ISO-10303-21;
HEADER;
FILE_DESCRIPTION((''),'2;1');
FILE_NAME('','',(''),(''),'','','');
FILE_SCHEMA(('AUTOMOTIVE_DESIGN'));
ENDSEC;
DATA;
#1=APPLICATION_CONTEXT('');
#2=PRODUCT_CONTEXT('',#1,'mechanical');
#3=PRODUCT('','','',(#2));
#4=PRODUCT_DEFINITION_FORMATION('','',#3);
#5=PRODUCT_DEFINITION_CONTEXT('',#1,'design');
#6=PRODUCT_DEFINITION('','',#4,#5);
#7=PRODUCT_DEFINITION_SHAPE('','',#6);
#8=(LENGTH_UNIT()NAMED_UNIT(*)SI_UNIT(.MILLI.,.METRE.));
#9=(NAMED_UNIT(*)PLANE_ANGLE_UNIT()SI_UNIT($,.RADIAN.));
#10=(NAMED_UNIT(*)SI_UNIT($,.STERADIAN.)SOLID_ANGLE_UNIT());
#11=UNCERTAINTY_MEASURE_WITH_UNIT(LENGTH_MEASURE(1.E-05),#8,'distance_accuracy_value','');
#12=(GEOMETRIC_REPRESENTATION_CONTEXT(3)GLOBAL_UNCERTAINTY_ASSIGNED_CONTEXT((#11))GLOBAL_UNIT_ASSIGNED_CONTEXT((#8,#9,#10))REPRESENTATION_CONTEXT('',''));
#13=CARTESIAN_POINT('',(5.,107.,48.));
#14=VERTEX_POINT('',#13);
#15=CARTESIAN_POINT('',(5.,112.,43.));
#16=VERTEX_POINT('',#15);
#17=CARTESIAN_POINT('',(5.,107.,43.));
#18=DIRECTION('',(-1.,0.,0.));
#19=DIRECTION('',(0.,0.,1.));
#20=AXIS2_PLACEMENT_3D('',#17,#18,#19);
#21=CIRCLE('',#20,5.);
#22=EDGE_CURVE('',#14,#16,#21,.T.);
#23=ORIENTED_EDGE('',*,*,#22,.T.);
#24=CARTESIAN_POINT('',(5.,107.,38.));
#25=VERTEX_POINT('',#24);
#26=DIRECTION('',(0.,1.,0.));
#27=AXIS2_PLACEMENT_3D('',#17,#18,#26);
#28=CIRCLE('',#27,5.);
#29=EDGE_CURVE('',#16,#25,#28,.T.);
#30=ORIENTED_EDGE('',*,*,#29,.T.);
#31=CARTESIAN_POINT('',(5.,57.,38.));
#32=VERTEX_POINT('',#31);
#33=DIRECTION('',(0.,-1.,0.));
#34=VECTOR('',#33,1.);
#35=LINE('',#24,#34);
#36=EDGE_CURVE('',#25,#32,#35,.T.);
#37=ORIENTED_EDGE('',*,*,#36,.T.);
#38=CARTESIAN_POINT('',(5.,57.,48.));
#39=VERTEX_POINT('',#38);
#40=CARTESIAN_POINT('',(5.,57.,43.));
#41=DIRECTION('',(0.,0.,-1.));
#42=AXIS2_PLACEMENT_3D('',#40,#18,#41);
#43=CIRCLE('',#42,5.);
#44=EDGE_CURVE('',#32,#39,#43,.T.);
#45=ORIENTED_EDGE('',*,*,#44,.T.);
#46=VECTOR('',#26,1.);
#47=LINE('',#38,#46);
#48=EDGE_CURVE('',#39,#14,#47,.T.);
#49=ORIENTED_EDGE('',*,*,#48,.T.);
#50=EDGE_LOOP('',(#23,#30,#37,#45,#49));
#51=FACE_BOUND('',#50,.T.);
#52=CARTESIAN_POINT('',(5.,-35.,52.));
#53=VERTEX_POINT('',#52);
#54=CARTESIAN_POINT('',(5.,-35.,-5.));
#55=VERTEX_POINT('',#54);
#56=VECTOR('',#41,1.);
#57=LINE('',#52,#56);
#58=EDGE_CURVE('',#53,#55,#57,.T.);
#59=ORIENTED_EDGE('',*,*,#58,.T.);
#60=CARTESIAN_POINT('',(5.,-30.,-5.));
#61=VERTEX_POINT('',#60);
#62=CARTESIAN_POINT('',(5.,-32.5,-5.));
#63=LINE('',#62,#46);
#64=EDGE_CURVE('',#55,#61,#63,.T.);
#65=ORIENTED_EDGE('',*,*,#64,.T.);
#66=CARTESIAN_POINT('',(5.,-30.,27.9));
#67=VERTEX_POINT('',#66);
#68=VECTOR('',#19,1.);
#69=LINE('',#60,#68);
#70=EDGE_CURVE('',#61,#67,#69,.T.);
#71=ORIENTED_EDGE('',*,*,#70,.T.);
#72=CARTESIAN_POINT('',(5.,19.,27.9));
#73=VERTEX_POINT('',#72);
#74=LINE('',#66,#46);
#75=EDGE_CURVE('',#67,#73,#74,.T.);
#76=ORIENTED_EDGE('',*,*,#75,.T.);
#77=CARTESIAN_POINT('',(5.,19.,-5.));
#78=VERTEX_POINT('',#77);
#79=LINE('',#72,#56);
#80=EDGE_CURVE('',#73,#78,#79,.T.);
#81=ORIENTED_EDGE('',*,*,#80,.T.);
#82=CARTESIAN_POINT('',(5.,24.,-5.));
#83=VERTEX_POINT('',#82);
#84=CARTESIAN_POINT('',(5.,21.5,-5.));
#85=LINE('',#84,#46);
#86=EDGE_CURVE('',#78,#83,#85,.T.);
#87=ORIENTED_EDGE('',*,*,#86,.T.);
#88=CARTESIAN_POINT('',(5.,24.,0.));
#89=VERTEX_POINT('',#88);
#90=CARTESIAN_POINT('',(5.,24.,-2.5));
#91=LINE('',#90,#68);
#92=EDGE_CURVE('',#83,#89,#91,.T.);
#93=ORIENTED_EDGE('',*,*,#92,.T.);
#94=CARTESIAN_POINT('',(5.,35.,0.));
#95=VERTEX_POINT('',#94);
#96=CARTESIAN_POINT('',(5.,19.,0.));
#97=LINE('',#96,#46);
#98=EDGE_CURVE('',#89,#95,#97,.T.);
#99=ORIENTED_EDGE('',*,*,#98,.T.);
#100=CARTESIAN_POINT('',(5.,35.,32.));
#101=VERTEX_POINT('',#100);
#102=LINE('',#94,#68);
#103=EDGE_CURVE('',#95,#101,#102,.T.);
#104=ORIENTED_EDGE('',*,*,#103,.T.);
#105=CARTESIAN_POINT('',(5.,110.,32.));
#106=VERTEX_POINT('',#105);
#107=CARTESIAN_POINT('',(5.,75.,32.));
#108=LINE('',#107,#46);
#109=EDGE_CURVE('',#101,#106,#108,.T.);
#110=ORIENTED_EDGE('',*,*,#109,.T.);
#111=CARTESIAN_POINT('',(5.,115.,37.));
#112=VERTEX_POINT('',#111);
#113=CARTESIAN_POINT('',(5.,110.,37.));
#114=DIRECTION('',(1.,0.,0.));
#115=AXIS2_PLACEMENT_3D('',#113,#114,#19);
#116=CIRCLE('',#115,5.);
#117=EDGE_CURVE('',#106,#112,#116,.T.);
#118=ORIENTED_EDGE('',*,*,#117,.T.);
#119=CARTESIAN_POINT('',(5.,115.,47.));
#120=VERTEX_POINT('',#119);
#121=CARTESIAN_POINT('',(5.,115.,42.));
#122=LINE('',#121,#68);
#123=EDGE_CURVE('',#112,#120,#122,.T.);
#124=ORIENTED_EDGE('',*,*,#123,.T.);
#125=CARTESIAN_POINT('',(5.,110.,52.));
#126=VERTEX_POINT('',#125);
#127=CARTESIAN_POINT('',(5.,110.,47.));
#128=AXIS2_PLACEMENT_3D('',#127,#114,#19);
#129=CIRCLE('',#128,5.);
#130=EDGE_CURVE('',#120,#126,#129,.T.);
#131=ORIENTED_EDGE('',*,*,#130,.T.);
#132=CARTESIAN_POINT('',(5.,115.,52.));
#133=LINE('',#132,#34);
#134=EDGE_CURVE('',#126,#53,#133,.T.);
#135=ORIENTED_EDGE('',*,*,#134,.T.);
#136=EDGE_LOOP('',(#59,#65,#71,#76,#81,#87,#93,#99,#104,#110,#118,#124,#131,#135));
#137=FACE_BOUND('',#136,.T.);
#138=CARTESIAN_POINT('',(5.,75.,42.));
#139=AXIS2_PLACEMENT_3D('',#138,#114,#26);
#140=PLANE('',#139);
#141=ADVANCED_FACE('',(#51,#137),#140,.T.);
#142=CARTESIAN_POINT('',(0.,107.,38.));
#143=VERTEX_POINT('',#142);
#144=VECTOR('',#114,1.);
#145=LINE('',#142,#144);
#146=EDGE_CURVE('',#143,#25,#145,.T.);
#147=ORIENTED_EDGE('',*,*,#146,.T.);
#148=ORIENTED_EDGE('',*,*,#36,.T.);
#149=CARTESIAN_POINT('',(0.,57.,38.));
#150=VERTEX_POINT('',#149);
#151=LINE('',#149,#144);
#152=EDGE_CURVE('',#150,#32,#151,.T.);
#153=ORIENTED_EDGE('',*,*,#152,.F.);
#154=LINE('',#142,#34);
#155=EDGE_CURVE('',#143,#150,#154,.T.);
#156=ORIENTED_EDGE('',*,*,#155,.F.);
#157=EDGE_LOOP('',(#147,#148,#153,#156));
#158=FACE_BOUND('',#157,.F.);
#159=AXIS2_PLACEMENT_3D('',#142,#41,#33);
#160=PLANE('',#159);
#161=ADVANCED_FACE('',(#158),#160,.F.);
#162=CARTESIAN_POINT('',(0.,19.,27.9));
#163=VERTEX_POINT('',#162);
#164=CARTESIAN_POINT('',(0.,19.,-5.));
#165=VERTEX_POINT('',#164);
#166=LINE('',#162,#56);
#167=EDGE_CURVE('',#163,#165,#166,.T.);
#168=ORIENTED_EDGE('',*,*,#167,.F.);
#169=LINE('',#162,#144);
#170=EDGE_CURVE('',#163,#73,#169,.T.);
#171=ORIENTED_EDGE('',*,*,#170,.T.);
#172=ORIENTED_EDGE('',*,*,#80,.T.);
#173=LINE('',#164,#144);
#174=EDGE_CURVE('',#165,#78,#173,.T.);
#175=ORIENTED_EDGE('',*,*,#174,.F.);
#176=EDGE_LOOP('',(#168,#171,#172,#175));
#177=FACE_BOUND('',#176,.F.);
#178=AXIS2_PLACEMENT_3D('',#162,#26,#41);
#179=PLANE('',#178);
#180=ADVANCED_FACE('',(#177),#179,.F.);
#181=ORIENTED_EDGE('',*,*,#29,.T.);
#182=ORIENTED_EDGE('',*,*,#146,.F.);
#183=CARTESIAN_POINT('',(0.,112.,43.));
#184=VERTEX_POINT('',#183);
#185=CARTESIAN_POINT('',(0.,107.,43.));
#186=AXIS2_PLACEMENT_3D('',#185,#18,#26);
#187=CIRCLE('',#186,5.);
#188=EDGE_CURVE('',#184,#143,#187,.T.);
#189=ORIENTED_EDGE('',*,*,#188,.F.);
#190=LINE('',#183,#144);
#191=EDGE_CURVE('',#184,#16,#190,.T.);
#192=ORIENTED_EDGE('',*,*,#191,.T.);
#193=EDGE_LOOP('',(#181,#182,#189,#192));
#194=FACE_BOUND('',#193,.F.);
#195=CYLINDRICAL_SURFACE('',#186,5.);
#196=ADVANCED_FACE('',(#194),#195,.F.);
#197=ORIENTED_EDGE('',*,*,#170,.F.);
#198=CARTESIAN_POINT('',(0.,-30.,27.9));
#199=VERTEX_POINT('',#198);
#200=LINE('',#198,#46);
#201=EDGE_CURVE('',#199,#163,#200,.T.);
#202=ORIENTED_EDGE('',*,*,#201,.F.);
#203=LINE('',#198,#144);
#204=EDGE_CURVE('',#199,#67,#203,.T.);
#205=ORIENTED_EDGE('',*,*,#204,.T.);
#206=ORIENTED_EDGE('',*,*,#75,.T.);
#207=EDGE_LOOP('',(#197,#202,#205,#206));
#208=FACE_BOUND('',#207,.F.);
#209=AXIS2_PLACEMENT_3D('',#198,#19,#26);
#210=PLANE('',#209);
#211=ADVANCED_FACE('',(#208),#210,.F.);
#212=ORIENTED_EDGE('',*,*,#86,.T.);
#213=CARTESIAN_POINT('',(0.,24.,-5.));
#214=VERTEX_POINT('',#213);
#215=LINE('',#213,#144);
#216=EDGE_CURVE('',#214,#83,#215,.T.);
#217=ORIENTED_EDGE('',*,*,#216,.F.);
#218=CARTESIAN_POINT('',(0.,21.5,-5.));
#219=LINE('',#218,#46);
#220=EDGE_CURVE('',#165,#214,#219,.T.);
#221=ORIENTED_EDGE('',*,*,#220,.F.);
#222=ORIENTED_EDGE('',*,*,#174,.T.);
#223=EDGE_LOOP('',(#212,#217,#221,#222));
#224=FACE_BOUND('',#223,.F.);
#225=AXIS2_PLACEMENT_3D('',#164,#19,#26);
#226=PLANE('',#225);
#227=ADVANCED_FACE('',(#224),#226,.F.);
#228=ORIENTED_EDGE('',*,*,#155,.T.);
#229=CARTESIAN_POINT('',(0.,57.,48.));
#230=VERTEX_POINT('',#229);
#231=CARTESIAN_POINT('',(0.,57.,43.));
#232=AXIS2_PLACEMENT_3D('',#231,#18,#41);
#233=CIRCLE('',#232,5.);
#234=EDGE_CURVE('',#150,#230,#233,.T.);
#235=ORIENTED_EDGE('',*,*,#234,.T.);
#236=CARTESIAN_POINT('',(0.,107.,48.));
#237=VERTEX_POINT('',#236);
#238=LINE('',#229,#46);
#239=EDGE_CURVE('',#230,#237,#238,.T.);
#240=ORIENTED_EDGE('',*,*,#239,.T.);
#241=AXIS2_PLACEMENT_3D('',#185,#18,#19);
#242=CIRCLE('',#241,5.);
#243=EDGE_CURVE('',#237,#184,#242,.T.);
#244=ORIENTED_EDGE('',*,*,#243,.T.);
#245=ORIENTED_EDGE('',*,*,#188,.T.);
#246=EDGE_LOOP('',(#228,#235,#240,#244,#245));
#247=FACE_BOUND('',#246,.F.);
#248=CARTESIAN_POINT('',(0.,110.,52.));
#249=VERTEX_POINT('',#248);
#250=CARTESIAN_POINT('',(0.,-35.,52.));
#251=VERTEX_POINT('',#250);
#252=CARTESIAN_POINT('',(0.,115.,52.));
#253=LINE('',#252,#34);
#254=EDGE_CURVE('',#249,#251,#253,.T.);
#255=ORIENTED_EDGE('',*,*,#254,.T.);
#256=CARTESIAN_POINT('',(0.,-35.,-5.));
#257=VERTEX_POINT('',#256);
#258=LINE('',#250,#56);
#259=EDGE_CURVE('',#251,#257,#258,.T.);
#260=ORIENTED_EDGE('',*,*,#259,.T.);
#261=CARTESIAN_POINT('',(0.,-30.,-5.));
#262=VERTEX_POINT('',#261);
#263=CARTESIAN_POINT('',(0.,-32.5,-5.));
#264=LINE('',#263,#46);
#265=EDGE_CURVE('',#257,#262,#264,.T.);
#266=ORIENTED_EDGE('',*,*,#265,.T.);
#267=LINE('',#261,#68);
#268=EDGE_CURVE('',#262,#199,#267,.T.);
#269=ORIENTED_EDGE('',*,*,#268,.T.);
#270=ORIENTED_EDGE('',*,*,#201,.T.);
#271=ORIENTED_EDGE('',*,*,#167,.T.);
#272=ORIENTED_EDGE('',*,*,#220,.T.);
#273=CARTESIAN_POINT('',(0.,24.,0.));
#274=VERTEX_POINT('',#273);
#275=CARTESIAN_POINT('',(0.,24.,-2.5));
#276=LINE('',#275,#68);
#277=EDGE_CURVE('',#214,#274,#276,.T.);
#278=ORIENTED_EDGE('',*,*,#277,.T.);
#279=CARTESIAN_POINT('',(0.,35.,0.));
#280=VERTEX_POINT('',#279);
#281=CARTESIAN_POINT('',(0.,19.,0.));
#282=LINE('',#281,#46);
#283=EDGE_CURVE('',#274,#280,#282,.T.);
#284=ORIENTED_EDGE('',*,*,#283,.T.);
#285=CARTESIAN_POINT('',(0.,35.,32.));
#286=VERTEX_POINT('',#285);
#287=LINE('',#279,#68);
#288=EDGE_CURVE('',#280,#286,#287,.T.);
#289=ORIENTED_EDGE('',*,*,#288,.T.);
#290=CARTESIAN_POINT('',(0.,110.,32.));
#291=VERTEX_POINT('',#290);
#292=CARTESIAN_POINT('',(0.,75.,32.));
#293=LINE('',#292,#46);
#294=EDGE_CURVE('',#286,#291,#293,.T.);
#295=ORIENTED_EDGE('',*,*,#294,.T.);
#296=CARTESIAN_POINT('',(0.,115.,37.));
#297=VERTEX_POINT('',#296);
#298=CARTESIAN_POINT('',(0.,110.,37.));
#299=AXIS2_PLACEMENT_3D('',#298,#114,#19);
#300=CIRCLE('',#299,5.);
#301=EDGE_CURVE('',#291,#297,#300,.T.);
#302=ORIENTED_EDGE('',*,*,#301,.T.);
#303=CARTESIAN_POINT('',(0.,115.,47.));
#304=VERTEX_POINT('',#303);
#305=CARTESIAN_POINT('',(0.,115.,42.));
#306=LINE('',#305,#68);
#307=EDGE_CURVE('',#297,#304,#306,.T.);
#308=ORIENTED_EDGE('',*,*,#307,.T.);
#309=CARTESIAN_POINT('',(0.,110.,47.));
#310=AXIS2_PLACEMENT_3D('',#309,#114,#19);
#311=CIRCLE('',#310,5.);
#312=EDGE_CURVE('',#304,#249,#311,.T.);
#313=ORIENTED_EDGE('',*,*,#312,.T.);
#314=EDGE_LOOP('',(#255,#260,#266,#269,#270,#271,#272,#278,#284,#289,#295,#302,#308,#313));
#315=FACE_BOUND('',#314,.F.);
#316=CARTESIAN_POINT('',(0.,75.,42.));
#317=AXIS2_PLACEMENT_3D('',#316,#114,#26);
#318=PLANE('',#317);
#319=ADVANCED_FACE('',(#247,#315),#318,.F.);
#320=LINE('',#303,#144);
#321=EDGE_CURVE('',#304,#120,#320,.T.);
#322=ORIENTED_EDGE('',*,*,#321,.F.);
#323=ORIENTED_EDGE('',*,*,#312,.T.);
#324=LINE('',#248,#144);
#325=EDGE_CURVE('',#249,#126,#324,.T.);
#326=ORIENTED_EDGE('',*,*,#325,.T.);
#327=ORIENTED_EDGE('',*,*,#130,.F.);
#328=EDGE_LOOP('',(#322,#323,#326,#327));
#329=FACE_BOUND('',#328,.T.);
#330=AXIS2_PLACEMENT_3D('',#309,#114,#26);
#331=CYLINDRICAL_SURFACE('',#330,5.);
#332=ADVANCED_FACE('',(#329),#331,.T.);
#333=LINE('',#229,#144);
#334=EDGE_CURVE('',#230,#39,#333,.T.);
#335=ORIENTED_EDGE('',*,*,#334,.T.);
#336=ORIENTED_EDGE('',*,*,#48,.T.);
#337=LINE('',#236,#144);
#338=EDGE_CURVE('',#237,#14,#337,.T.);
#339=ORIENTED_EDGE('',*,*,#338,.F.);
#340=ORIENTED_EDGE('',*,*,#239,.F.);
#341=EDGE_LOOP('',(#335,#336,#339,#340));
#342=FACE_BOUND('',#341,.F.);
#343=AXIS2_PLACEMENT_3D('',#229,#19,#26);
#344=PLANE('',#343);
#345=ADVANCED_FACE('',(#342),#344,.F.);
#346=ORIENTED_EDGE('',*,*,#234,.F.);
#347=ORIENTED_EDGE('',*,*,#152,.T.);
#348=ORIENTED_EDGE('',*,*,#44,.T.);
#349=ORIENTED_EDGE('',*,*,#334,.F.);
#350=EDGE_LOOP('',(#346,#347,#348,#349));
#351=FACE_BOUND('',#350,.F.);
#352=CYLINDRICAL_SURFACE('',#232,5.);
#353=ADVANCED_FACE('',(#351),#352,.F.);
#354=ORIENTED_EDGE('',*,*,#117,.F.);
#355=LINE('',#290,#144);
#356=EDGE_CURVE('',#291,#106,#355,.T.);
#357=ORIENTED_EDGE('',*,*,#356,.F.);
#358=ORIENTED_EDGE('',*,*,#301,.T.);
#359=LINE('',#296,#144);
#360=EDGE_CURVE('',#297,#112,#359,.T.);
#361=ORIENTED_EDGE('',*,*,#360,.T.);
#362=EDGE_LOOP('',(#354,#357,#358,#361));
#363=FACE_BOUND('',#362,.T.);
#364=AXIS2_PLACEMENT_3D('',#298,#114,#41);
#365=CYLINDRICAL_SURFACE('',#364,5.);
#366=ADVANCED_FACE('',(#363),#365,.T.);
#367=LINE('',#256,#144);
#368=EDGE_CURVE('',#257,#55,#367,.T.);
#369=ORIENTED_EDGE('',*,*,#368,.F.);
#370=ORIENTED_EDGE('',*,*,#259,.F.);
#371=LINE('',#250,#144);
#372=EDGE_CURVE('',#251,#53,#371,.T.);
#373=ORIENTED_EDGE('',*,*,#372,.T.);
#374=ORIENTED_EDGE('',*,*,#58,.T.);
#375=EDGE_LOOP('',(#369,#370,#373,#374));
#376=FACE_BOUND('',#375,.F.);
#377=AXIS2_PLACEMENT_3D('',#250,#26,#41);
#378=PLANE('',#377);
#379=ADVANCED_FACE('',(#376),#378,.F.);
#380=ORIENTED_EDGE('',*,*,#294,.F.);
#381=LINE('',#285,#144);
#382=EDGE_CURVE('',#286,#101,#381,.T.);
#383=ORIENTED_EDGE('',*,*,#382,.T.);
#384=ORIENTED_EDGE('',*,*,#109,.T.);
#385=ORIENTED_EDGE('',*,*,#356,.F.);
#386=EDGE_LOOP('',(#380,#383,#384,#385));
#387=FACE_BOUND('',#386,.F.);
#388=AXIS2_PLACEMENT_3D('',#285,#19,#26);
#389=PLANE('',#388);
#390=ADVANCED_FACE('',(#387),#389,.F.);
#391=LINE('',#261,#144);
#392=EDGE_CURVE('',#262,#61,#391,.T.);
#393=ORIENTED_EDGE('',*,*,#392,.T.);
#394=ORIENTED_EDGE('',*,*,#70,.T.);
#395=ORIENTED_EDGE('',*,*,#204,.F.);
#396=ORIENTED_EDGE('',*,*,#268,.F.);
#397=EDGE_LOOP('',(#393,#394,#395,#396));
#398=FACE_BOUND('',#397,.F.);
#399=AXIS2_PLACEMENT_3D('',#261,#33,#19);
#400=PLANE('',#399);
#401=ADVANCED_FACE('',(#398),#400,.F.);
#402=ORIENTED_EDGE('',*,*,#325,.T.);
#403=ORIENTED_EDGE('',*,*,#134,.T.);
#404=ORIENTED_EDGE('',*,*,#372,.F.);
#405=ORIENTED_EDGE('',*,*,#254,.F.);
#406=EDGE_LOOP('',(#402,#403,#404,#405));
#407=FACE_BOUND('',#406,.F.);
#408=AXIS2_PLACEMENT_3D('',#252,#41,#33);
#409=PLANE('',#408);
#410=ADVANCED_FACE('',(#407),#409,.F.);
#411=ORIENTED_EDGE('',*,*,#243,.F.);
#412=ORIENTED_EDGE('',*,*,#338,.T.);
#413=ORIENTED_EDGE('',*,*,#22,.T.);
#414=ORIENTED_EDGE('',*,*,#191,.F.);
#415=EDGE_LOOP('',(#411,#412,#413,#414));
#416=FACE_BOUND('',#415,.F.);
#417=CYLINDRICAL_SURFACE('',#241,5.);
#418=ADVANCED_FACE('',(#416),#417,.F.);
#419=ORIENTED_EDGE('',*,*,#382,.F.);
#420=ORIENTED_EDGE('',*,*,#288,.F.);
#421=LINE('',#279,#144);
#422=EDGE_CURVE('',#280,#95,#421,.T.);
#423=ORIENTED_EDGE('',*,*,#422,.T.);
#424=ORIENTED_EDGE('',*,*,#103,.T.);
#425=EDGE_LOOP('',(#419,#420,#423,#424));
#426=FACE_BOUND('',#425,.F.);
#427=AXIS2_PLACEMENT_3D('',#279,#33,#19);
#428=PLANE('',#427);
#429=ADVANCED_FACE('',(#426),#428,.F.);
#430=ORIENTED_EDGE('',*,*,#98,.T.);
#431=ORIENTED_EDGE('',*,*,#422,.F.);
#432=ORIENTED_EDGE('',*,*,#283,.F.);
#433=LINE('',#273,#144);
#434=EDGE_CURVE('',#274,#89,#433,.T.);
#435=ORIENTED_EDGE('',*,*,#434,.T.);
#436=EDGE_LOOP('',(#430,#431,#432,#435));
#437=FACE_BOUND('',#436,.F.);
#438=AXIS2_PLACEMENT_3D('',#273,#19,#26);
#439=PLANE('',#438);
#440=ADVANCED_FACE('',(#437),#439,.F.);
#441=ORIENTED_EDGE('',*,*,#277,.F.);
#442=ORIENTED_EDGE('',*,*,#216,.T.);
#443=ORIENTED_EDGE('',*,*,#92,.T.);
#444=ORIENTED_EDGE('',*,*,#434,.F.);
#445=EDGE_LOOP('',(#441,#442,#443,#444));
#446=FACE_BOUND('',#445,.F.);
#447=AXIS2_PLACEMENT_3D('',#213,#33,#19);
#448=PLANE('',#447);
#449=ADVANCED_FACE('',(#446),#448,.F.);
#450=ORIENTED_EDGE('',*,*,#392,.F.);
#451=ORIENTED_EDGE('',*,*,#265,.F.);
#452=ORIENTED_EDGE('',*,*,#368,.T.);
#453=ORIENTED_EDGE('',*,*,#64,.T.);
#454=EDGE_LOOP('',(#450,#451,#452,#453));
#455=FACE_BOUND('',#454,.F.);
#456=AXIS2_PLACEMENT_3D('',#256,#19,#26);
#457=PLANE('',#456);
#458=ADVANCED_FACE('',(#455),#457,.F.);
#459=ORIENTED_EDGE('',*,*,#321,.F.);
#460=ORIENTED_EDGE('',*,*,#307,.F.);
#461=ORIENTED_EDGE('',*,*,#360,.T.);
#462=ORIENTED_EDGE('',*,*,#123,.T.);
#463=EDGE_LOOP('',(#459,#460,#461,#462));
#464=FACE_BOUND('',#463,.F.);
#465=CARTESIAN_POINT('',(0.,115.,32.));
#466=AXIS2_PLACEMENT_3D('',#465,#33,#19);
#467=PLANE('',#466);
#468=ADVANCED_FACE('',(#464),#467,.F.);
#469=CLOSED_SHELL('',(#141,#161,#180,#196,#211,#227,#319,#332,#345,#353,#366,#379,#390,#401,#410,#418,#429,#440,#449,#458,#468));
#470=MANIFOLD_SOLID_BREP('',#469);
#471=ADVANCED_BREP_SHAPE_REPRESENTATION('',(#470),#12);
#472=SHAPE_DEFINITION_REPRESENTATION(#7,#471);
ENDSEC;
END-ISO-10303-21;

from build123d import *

# Parameters (mm, degrees)
F0_W     = 80
F0_H     = 20
F0_W_2   = 5
F0_H_2   = 5
F1_DEPTH = 5
F2_R     = 5


# Not quite as in the source:
# - a feature names something its author has since deleted; it is built from what else it names


with BuildPart() as f1:
    # F0 (on Right) → F1 (new body)
    with BuildSketch(Plane.YZ):
        with Locations((75, 42)):
            Rectangle(F0_W, F0_H)
        with BuildLine():
            ThreePointArc((107, 48), (110.5355339059, 46.5355339059), (112, 43))
            ThreePointArc((112, 43), (110.5355339059, 39.4644660941), (107, 38))
            Line((107, 38), (57, 38))
            ThreePointArc((57, 38), (52, 43), (57, 48))
            Line((57, 48), (107, 48))
        make_face(mode=Mode.SUBTRACT)
        Polygon((35, 52), (-35, 52), (-35, 0), (-30, 0), (-30, 27.9), (19, 27.9), (19, 0), (24, 0), (35, 0), (35, 32), align=None)
        with Locations((21.5, -2.5)):
            Rectangle(F0_W_2, F0_H_2)
        with Locations((-32.5, -2.5)):
            Rectangle(F0_W_2, F0_H_2)
    extrude(amount=F1_DEPTH)

    # F2
    f2_edges = [f1.edges().sort_by_distance(p)[0] for p in [
        (2.5, 115, 52),
        (2.5, 115, 32),
    ]]
    fillet(f2_edges, radius=F2_R)


solid = f1.part
